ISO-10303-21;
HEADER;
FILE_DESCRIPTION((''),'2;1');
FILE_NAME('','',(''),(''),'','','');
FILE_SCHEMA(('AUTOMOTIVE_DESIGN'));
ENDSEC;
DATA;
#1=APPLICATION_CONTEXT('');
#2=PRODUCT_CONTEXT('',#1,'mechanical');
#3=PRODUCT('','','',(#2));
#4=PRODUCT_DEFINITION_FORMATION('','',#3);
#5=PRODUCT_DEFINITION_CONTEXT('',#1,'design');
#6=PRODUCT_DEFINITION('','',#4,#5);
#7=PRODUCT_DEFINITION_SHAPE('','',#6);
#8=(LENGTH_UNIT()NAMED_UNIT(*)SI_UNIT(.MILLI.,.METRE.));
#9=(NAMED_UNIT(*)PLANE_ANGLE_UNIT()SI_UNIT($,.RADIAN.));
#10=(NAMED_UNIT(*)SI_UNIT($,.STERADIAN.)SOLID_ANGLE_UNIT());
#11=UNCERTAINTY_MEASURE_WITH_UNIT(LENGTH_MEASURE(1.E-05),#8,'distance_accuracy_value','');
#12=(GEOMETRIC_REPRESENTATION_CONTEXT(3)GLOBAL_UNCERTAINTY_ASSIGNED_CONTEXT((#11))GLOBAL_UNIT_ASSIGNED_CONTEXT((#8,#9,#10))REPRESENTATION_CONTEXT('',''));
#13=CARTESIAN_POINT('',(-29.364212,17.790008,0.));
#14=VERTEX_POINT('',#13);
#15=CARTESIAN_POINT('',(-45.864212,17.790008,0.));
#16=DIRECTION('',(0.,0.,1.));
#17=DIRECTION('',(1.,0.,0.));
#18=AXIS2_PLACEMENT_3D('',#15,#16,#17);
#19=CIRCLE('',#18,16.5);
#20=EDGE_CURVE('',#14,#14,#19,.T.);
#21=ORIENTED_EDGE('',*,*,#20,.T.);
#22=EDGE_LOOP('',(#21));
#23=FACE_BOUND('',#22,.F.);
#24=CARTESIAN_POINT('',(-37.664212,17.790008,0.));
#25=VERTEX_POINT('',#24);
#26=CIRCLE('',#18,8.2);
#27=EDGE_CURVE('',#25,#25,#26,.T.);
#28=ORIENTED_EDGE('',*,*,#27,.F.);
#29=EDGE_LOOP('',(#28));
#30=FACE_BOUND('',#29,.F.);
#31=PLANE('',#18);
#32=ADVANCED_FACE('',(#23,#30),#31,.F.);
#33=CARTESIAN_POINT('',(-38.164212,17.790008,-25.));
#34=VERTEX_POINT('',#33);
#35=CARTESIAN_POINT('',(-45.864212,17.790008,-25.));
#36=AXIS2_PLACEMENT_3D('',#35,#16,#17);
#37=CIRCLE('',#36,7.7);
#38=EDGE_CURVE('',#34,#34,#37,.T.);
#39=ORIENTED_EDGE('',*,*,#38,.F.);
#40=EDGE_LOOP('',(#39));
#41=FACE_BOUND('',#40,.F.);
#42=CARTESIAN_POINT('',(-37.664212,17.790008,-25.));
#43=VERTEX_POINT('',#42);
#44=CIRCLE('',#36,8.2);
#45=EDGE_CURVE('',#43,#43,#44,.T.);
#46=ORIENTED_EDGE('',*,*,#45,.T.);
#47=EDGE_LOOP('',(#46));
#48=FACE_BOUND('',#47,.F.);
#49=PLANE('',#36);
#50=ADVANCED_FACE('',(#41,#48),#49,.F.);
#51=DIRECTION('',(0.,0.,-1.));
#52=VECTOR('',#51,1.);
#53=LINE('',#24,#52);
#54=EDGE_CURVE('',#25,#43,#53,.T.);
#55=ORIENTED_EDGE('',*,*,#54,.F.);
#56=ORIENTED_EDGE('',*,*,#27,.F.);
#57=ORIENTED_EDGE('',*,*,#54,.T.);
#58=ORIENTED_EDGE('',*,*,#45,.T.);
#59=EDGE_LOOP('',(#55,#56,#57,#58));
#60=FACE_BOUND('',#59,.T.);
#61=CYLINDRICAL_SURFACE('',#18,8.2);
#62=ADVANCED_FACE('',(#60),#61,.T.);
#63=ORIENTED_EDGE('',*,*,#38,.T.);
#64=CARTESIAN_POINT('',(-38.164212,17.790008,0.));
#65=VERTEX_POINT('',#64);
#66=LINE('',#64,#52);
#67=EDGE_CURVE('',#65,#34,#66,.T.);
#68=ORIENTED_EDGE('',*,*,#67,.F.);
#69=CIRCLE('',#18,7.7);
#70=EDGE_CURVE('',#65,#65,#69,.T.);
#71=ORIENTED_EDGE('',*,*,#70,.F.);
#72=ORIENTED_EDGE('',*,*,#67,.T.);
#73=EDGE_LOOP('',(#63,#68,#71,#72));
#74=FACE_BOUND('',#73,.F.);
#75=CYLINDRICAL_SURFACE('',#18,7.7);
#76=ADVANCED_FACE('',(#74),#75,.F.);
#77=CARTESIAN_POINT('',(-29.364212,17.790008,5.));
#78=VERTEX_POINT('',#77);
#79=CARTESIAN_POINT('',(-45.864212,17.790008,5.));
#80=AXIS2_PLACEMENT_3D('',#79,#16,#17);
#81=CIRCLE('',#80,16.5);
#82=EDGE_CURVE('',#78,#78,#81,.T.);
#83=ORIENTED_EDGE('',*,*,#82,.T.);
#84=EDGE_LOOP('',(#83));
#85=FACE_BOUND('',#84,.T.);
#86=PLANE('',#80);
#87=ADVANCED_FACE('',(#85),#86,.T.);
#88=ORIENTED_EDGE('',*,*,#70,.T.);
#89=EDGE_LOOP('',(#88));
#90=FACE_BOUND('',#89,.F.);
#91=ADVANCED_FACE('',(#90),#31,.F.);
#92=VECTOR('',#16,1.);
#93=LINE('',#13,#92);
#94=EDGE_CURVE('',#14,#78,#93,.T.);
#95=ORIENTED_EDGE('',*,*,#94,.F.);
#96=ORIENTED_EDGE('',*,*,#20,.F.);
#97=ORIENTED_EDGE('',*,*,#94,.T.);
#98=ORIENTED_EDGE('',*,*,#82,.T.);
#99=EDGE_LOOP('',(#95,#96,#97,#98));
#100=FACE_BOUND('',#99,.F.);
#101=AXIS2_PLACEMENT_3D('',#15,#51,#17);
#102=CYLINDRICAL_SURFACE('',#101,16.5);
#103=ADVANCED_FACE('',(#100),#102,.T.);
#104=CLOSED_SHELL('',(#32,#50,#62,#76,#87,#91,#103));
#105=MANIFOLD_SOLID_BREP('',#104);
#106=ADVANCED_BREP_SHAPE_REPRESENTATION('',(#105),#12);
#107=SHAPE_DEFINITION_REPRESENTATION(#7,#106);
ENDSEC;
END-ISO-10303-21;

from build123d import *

# Parameters (mm, degrees)
F2_R     = 16.5
F3_DEPTH = 5
F4_R     = 8.2
F4_R_2   = 7.7
F5_DEPTH = 25


# Not quite as in the source:
# - the program builds the solid bodies; features that only make, move or delete a surface that nothing else refers to are left out


with BuildPart() as f3:
    # F2 (on Top) → F3 (new body)
    with BuildSketch(Plane.XY):
        with Locations((-45.8642121462, 17.7900076957)):
            Circle(F2_R)
    extrude(amount=F3_DEPTH)

    # F4 (on Top) → F5 (join)
    with BuildSketch(Plane.XY):
        with Locations((-45.8642121462, 17.7900076957)):
            Circle(F4_R)
        with Locations((-45.8642121462, 17.7900076957)):
            Circle(F4_R_2, mode=Mode.SUBTRACT)
    extrude(amount=-F5_DEPTH)


solid = f3.part
